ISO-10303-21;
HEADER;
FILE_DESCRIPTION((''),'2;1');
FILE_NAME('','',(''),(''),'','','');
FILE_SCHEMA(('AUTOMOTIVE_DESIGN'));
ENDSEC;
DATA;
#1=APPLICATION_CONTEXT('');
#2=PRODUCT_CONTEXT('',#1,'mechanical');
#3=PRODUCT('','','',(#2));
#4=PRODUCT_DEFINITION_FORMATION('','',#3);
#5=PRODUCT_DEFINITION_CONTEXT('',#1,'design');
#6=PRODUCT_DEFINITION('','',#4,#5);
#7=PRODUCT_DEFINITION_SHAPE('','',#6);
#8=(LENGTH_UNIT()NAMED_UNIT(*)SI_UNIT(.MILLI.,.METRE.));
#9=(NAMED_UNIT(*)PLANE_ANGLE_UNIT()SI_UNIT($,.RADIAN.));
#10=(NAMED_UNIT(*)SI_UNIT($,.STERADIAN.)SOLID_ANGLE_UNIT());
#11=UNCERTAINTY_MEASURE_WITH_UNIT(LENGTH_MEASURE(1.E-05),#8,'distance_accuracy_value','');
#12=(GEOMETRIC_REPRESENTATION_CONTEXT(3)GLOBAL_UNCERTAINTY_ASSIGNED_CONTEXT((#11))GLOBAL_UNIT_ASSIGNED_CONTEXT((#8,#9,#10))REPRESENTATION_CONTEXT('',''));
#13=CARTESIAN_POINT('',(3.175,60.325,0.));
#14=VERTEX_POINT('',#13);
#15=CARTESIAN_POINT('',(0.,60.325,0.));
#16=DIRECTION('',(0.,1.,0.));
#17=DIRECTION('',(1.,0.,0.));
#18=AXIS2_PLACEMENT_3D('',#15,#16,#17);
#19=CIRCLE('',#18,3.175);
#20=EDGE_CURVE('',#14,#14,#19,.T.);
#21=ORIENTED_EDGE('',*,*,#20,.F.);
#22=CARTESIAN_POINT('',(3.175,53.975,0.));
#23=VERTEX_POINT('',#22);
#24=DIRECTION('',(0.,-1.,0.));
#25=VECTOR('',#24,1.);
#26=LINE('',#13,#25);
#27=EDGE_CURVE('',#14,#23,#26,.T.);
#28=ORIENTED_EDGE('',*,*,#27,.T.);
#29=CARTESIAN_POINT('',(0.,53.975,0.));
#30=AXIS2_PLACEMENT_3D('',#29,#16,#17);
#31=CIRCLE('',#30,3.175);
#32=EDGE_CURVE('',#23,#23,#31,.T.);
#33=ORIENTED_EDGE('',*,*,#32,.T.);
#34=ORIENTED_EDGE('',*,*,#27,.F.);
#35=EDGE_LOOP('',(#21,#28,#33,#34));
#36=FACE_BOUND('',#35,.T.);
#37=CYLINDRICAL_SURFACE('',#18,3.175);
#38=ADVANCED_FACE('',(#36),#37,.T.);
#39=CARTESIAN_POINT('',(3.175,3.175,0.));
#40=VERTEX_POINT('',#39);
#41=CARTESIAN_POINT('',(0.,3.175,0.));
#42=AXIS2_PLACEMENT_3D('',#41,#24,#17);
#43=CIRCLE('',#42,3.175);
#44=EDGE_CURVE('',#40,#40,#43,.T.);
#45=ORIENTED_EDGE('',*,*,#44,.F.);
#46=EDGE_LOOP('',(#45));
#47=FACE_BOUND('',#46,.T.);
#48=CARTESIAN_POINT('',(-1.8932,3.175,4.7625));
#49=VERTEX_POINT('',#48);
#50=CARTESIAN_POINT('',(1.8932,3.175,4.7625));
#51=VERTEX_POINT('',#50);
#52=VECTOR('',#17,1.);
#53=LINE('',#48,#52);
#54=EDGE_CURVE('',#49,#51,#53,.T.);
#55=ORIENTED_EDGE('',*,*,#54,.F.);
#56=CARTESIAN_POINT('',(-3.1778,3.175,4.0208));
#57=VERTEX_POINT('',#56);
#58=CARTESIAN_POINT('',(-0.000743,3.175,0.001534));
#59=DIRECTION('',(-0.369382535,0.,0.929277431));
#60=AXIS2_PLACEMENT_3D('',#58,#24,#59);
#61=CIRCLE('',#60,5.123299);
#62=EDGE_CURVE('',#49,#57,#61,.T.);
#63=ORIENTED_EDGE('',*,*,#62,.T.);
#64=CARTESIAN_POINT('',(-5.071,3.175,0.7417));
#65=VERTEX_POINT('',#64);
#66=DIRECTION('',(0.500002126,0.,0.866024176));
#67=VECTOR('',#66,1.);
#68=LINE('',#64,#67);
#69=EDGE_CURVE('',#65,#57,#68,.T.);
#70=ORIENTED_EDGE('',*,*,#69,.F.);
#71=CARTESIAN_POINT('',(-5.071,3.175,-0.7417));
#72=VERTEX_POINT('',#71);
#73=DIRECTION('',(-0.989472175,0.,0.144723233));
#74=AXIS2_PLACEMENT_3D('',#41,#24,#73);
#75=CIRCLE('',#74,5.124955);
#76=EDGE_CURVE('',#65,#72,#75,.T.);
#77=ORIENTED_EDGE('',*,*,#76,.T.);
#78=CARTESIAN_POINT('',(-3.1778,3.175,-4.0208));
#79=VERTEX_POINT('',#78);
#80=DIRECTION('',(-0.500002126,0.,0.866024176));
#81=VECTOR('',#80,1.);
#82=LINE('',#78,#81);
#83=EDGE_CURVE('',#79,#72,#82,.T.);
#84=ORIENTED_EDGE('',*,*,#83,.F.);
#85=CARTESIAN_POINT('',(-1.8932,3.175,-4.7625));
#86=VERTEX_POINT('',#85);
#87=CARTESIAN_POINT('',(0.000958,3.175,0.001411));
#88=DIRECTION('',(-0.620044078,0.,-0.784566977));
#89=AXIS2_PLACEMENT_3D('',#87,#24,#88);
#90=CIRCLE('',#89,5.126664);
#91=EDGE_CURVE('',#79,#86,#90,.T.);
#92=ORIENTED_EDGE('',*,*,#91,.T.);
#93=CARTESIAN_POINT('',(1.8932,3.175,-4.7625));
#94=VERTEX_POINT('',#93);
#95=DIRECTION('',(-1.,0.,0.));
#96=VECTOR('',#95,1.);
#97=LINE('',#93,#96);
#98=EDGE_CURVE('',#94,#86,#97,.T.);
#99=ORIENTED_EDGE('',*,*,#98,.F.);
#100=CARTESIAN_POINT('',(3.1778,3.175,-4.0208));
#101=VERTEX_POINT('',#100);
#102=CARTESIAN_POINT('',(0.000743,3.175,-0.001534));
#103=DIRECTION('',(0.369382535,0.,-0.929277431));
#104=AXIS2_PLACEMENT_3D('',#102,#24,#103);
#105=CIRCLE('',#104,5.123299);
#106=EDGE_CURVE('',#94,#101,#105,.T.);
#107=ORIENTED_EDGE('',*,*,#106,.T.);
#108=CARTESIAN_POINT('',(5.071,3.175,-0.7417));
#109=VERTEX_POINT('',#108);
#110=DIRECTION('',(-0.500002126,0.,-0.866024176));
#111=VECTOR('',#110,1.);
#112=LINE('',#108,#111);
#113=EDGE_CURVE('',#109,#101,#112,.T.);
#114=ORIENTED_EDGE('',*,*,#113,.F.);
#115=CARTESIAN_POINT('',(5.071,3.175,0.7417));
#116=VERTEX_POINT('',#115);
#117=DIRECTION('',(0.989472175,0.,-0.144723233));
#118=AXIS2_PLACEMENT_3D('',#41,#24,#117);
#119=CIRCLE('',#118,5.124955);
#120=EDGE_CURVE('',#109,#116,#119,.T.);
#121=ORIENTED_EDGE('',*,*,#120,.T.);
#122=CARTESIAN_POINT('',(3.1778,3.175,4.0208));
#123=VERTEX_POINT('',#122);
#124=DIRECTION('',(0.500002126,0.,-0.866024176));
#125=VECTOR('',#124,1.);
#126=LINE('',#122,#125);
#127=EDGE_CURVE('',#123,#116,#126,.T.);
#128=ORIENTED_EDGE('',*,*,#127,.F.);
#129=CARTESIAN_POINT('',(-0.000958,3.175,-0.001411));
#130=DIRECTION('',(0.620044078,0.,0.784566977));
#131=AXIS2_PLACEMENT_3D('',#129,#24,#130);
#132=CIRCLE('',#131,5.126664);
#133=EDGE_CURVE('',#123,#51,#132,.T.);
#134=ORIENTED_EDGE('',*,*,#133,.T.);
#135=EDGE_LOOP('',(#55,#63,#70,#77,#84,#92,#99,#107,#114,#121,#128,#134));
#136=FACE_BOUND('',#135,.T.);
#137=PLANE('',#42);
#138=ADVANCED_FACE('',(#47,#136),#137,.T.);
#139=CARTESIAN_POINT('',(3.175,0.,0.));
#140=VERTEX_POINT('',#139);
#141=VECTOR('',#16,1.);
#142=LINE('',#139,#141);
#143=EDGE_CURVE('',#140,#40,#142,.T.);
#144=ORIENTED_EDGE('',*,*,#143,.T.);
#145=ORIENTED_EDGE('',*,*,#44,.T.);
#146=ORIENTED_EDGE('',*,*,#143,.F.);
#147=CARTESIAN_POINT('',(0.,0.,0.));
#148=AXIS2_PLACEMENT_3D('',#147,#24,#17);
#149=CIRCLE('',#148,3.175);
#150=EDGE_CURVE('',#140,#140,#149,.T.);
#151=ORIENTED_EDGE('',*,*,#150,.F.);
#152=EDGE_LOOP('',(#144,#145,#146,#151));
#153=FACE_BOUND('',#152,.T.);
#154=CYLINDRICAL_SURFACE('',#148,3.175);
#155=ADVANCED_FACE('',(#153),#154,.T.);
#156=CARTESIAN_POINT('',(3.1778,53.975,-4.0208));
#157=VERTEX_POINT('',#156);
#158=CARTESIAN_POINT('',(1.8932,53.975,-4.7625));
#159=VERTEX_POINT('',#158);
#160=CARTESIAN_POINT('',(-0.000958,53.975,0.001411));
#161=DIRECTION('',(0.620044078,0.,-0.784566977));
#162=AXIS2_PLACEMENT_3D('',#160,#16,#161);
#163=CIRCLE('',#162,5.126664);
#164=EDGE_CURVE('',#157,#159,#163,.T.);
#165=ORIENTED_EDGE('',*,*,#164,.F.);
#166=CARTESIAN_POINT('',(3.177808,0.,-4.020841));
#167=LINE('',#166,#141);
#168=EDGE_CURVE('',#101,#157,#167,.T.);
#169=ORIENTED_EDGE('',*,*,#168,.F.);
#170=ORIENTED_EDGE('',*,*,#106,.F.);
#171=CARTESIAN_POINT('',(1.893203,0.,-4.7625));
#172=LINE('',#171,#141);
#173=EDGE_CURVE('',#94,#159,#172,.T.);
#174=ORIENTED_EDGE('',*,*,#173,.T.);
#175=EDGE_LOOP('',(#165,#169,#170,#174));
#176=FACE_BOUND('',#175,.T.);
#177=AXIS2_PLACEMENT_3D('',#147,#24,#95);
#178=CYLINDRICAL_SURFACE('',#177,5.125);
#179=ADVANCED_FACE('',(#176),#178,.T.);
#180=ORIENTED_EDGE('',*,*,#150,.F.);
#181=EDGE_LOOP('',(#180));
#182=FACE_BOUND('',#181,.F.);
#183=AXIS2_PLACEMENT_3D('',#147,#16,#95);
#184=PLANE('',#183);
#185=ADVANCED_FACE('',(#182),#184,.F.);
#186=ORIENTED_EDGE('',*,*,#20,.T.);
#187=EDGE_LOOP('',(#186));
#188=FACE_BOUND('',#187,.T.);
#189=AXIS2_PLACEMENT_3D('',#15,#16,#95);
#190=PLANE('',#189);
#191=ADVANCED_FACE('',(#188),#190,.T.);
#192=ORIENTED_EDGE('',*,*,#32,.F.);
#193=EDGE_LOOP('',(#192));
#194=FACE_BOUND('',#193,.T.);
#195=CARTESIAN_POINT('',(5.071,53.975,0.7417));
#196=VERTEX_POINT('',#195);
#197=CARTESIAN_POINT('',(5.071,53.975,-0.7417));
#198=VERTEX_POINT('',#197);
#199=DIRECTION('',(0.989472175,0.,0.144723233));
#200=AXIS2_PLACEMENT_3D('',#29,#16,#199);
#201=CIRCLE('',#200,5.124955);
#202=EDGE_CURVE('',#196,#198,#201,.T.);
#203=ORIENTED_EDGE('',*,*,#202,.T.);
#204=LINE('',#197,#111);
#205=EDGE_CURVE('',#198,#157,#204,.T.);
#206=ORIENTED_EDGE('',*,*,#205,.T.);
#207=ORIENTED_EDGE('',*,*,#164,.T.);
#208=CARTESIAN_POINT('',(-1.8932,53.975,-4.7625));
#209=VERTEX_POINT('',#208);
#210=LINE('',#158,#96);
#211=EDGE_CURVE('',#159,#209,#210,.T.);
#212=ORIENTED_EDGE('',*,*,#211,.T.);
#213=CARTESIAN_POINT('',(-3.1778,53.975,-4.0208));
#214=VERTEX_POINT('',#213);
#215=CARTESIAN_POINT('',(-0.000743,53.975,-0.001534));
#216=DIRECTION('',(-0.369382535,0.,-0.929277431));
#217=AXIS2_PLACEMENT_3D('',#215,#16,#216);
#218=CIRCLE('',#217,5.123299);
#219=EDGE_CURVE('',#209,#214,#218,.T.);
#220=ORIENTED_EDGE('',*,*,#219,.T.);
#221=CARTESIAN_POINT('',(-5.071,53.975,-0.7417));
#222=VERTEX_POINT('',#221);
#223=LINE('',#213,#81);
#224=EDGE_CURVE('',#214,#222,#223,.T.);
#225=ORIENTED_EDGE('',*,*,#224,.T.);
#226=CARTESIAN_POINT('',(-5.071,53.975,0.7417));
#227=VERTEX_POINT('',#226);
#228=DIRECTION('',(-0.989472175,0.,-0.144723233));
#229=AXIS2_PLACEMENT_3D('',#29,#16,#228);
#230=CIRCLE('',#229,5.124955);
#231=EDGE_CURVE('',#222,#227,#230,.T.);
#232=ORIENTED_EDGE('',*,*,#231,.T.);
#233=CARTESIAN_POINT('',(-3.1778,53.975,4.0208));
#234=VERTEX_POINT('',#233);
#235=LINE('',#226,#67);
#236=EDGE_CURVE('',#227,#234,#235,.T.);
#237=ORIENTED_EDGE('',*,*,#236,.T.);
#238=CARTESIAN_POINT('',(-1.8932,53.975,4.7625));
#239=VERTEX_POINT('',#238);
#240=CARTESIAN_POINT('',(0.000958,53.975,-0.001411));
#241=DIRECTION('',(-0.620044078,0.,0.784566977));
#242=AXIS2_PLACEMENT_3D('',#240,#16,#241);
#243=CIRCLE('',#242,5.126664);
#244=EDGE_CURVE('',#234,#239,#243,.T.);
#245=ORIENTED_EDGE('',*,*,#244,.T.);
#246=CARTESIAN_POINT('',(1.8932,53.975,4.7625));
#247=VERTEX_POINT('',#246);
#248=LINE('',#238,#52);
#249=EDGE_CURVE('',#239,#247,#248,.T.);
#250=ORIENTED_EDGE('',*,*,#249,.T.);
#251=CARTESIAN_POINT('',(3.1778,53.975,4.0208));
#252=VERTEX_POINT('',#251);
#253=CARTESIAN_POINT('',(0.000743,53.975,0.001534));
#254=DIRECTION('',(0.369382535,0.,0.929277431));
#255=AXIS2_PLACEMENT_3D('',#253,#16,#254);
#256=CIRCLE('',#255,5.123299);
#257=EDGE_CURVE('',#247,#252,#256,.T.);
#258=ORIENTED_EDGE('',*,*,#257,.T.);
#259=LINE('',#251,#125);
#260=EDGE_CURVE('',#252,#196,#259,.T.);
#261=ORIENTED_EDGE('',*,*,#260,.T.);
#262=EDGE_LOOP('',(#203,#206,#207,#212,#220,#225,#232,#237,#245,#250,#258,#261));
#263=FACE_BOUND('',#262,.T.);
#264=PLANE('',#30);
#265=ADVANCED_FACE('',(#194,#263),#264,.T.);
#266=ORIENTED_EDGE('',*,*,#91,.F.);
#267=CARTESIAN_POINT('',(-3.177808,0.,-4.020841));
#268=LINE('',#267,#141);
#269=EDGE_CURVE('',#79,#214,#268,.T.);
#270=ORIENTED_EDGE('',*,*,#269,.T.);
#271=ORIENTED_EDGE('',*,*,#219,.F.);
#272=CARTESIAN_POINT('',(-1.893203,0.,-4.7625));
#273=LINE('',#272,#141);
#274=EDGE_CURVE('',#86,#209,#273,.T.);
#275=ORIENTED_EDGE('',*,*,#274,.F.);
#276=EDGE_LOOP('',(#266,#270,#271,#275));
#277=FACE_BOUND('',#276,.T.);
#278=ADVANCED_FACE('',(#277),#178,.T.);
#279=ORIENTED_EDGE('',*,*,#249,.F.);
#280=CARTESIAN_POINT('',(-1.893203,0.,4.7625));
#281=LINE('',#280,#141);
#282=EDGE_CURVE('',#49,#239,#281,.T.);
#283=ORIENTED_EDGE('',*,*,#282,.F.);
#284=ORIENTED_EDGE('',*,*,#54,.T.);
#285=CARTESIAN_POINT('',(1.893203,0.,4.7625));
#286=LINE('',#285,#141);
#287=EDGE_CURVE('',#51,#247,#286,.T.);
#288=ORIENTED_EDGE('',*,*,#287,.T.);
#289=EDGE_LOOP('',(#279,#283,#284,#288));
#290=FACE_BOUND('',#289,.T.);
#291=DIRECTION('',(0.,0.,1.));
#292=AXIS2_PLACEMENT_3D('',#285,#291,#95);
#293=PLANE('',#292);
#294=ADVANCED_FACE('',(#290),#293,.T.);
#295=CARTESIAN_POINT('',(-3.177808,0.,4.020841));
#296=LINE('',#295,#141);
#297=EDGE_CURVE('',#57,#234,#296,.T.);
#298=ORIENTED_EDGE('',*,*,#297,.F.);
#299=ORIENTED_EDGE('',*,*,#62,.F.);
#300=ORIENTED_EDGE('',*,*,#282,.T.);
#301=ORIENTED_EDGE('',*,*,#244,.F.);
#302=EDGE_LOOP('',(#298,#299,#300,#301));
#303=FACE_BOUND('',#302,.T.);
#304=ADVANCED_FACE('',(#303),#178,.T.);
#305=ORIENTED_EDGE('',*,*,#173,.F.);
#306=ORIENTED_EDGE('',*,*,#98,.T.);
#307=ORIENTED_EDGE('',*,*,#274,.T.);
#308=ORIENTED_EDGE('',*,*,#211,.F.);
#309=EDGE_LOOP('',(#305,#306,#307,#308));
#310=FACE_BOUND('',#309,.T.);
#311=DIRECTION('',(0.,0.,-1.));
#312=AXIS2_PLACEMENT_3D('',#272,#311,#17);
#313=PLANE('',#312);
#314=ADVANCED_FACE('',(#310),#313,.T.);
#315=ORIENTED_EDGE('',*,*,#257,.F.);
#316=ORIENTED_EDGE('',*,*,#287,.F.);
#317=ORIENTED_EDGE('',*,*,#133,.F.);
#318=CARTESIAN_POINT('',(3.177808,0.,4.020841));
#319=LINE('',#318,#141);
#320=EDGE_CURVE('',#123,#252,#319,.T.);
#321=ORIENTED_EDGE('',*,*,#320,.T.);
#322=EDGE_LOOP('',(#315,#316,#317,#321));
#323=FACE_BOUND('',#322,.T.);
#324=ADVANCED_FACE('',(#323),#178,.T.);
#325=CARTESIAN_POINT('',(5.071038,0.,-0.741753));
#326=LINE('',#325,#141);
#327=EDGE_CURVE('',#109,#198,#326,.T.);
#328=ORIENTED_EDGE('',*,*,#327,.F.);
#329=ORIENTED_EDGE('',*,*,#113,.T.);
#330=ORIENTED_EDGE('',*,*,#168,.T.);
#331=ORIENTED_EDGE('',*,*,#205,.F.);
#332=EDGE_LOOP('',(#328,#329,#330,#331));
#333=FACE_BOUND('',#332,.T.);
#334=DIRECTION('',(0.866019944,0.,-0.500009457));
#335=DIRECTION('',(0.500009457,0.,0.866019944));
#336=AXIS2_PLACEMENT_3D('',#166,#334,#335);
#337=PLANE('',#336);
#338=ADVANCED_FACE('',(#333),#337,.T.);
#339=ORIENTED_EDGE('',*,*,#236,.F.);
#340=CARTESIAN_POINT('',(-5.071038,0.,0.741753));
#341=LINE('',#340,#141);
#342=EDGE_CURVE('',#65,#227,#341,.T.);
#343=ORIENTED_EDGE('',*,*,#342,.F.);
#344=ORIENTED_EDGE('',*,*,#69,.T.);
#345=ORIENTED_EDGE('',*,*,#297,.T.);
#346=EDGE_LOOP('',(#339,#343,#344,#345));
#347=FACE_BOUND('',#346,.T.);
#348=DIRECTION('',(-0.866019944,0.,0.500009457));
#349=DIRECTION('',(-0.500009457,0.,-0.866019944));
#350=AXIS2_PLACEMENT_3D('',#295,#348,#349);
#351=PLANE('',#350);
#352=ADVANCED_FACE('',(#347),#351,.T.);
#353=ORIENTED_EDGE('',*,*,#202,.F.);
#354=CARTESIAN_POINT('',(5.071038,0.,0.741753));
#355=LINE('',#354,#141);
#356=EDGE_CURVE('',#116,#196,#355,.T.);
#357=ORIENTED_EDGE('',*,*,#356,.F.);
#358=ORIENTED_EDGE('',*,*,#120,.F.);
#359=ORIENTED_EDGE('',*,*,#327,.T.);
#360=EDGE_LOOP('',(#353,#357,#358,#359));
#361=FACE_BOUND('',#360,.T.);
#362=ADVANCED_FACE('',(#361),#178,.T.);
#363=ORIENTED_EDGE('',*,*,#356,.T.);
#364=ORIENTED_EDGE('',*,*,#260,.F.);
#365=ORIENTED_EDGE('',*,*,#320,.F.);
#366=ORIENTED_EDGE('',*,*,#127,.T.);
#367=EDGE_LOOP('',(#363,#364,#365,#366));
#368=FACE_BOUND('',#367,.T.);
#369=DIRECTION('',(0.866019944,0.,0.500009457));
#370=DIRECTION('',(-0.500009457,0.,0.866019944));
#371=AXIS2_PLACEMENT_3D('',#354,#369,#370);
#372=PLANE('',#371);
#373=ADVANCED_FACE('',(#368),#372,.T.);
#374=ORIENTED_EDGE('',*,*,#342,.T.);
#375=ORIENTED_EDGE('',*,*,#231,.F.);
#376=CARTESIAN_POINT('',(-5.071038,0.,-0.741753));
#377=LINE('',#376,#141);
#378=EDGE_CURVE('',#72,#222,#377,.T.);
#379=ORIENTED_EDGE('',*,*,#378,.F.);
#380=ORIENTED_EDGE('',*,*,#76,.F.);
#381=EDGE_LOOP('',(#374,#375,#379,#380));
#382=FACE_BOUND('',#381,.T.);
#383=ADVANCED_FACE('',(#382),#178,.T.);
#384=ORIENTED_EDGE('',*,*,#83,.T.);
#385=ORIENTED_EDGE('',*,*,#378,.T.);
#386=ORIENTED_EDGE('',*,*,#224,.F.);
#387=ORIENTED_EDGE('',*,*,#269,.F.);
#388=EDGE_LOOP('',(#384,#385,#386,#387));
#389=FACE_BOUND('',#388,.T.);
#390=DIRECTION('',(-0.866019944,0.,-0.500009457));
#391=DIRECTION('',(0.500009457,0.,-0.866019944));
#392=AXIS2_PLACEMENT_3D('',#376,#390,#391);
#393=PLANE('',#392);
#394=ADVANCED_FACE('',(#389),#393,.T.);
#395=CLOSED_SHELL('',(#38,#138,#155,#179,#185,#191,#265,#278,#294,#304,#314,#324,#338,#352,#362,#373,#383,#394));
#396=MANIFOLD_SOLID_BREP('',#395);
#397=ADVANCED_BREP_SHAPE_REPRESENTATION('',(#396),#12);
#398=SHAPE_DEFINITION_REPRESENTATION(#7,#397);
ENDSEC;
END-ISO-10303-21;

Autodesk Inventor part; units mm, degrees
ref_plane "YZ Plane" through (0, 0, 0) normal (1, 0, 0) x (0, 1, 0)
ref_plane "XZ Plane" through (0, 0, 0) normal (0, 1, 0) x (-1, 0, 0)
ref_plane "XY Plane" through (0, 0, 0) normal (0, 0, 1) x (1, 0, 0)
sketch "Sketch1" plane through (0, 0, 0) normal (0, 1, 0) x (-1, 0, 0)
  line L0 (-5.4993, 0) -> (-2.7496, 4.7625)
  line L1 (-2.7496, 4.7625) -> (2.7496, 4.7625)
  line L2 (2.7496, 4.7625) -> (5.4993, 0)
  line L3 (5.4993, 0) -> (2.7496, -4.7625)
  line L4 (2.7496, -4.7625) -> (-2.7496, -4.7625)
  line L5 (-2.7496, -4.7625) -> (-5.4993, 0)
  circle A0 centre (0, 0) radius 5.125
  point P0 (1.8932, -4.7625)
  point P1 (3.1778, -4.0208)
  point P2 (5.071, -0.7417)
  point P3 (5.071, 0.7417)
  point P4 (3.1778, 4.0208)
  point P5 (1.8932, 4.7625)
  point P6 (-1.8932, 4.7625)
  point P7 (-3.1778, 4.0208)
  point P8 (-5.071, 0.7417)
  point P9 (-5.071, -0.7417)
  point P10 (-3.1778, -4.0208)
  point P11 (-1.8932, -4.7625)
  dimension "d0" = 9.525
  dimension "d1" = 10.25
extrude "Extrusion1" add sketch "Sketch1" along normal blind 60.325 contours L0 A0 L1 L2 L3 L4 L5
sketch "Sketch2" plane through (0, 0, 0) normal (0, -1, 0) x (1, 0, 0)
  circle A0 centre (0, 0) radius 3.175
  arc A1 (3.1778, 4.0208) -> (1.8932, 4.7625) centre (0, 0) ccw projected
  line L0 (-1.8932, 4.7625) -> (1.8932, 4.7625) projected
  arc A2 (-1.8932, 4.7625) -> (-3.1778, 4.0208) centre (0, 0) ccw projected
  line L1 (-5.071, 0.7417) -> (-3.1778, 4.0208) projected
  arc A3 (-5.071, 0.7417) -> (-5.071, -0.7417) centre (0, 0) ccw projected
  line L2 (-3.1778, -4.0208) -> (-5.071, -0.7417) projected
  arc A4 (-3.1778, -4.0208) -> (-1.8932, -4.7625) centre (0, 0) ccw projected
  line L3 (1.8932, -4.7625) -> (-1.8932, -4.7625) projected
  arc A5 (1.8932, -4.7625) -> (3.1778, -4.0208) centre (0, 0) ccw projected
  line L4 (5.071, -0.7417) -> (3.1778, -4.0208) projected
  arc A6 (5.071, -0.7417) -> (5.071, 0.7417) centre (0, 0) ccw projected
  line L5 (3.1778, 4.0208) -> (5.071, 0.7417) projected
  dimension "d4" = 6.35
extrude "Extrusion2" cut sketch "Sketch2" against normal blind 3.175
sketch "Sketch3" plane through (0, 60.325, 0) normal (0, 1, 0) x (1, 0, 0)
  line L0 (5.071, 0.7417) -> (3.1778, 4.0208) projected
  arc A0 (3.1778, 4.0208) -> (1.8932, 4.7625) centre (0, 0) ccw projected
  line L1 (1.8932, 4.7625) -> (-1.8932, 4.7625) projected
  arc A1 (-1.8932, 4.7625) -> (-3.1778, 4.0208) centre (0, 0) ccw projected
  line L2 (-3.1778, 4.0208) -> (-5.071, 0.7417) projected
  arc A2 (-5.071, 0.7417) -> (-5.071, -0.7417) centre (0, 0) ccw projected
  line L3 (-5.071, -0.7417) -> (-3.1778, -4.0208) projected
  arc A3 (-3.1778, -4.0208) -> (-1.8932, -4.7625) centre (0, 0) ccw projected
  line L4 (-1.8932, -4.7625) -> (1.8932, -4.7625) projected
  arc A4 (1.8932, -4.7625) -> (3.1778, -4.0208) centre (0, 0) ccw projected
  line L5 (3.1778, -4.0208) -> (5.071, -0.7417) projected
  arc A5 (5.071, -0.7417) -> (5.071, 0.7417) centre (0, 0) ccw projected
  circle A6 centre (0, 0) radius 3.175
  dimension "d7" = 6.35
extrude "Extrusion3" cut sketch "Sketch3" against normal blind 6.35
properties part number "DriveShaft" material "Steel, Alloy"
